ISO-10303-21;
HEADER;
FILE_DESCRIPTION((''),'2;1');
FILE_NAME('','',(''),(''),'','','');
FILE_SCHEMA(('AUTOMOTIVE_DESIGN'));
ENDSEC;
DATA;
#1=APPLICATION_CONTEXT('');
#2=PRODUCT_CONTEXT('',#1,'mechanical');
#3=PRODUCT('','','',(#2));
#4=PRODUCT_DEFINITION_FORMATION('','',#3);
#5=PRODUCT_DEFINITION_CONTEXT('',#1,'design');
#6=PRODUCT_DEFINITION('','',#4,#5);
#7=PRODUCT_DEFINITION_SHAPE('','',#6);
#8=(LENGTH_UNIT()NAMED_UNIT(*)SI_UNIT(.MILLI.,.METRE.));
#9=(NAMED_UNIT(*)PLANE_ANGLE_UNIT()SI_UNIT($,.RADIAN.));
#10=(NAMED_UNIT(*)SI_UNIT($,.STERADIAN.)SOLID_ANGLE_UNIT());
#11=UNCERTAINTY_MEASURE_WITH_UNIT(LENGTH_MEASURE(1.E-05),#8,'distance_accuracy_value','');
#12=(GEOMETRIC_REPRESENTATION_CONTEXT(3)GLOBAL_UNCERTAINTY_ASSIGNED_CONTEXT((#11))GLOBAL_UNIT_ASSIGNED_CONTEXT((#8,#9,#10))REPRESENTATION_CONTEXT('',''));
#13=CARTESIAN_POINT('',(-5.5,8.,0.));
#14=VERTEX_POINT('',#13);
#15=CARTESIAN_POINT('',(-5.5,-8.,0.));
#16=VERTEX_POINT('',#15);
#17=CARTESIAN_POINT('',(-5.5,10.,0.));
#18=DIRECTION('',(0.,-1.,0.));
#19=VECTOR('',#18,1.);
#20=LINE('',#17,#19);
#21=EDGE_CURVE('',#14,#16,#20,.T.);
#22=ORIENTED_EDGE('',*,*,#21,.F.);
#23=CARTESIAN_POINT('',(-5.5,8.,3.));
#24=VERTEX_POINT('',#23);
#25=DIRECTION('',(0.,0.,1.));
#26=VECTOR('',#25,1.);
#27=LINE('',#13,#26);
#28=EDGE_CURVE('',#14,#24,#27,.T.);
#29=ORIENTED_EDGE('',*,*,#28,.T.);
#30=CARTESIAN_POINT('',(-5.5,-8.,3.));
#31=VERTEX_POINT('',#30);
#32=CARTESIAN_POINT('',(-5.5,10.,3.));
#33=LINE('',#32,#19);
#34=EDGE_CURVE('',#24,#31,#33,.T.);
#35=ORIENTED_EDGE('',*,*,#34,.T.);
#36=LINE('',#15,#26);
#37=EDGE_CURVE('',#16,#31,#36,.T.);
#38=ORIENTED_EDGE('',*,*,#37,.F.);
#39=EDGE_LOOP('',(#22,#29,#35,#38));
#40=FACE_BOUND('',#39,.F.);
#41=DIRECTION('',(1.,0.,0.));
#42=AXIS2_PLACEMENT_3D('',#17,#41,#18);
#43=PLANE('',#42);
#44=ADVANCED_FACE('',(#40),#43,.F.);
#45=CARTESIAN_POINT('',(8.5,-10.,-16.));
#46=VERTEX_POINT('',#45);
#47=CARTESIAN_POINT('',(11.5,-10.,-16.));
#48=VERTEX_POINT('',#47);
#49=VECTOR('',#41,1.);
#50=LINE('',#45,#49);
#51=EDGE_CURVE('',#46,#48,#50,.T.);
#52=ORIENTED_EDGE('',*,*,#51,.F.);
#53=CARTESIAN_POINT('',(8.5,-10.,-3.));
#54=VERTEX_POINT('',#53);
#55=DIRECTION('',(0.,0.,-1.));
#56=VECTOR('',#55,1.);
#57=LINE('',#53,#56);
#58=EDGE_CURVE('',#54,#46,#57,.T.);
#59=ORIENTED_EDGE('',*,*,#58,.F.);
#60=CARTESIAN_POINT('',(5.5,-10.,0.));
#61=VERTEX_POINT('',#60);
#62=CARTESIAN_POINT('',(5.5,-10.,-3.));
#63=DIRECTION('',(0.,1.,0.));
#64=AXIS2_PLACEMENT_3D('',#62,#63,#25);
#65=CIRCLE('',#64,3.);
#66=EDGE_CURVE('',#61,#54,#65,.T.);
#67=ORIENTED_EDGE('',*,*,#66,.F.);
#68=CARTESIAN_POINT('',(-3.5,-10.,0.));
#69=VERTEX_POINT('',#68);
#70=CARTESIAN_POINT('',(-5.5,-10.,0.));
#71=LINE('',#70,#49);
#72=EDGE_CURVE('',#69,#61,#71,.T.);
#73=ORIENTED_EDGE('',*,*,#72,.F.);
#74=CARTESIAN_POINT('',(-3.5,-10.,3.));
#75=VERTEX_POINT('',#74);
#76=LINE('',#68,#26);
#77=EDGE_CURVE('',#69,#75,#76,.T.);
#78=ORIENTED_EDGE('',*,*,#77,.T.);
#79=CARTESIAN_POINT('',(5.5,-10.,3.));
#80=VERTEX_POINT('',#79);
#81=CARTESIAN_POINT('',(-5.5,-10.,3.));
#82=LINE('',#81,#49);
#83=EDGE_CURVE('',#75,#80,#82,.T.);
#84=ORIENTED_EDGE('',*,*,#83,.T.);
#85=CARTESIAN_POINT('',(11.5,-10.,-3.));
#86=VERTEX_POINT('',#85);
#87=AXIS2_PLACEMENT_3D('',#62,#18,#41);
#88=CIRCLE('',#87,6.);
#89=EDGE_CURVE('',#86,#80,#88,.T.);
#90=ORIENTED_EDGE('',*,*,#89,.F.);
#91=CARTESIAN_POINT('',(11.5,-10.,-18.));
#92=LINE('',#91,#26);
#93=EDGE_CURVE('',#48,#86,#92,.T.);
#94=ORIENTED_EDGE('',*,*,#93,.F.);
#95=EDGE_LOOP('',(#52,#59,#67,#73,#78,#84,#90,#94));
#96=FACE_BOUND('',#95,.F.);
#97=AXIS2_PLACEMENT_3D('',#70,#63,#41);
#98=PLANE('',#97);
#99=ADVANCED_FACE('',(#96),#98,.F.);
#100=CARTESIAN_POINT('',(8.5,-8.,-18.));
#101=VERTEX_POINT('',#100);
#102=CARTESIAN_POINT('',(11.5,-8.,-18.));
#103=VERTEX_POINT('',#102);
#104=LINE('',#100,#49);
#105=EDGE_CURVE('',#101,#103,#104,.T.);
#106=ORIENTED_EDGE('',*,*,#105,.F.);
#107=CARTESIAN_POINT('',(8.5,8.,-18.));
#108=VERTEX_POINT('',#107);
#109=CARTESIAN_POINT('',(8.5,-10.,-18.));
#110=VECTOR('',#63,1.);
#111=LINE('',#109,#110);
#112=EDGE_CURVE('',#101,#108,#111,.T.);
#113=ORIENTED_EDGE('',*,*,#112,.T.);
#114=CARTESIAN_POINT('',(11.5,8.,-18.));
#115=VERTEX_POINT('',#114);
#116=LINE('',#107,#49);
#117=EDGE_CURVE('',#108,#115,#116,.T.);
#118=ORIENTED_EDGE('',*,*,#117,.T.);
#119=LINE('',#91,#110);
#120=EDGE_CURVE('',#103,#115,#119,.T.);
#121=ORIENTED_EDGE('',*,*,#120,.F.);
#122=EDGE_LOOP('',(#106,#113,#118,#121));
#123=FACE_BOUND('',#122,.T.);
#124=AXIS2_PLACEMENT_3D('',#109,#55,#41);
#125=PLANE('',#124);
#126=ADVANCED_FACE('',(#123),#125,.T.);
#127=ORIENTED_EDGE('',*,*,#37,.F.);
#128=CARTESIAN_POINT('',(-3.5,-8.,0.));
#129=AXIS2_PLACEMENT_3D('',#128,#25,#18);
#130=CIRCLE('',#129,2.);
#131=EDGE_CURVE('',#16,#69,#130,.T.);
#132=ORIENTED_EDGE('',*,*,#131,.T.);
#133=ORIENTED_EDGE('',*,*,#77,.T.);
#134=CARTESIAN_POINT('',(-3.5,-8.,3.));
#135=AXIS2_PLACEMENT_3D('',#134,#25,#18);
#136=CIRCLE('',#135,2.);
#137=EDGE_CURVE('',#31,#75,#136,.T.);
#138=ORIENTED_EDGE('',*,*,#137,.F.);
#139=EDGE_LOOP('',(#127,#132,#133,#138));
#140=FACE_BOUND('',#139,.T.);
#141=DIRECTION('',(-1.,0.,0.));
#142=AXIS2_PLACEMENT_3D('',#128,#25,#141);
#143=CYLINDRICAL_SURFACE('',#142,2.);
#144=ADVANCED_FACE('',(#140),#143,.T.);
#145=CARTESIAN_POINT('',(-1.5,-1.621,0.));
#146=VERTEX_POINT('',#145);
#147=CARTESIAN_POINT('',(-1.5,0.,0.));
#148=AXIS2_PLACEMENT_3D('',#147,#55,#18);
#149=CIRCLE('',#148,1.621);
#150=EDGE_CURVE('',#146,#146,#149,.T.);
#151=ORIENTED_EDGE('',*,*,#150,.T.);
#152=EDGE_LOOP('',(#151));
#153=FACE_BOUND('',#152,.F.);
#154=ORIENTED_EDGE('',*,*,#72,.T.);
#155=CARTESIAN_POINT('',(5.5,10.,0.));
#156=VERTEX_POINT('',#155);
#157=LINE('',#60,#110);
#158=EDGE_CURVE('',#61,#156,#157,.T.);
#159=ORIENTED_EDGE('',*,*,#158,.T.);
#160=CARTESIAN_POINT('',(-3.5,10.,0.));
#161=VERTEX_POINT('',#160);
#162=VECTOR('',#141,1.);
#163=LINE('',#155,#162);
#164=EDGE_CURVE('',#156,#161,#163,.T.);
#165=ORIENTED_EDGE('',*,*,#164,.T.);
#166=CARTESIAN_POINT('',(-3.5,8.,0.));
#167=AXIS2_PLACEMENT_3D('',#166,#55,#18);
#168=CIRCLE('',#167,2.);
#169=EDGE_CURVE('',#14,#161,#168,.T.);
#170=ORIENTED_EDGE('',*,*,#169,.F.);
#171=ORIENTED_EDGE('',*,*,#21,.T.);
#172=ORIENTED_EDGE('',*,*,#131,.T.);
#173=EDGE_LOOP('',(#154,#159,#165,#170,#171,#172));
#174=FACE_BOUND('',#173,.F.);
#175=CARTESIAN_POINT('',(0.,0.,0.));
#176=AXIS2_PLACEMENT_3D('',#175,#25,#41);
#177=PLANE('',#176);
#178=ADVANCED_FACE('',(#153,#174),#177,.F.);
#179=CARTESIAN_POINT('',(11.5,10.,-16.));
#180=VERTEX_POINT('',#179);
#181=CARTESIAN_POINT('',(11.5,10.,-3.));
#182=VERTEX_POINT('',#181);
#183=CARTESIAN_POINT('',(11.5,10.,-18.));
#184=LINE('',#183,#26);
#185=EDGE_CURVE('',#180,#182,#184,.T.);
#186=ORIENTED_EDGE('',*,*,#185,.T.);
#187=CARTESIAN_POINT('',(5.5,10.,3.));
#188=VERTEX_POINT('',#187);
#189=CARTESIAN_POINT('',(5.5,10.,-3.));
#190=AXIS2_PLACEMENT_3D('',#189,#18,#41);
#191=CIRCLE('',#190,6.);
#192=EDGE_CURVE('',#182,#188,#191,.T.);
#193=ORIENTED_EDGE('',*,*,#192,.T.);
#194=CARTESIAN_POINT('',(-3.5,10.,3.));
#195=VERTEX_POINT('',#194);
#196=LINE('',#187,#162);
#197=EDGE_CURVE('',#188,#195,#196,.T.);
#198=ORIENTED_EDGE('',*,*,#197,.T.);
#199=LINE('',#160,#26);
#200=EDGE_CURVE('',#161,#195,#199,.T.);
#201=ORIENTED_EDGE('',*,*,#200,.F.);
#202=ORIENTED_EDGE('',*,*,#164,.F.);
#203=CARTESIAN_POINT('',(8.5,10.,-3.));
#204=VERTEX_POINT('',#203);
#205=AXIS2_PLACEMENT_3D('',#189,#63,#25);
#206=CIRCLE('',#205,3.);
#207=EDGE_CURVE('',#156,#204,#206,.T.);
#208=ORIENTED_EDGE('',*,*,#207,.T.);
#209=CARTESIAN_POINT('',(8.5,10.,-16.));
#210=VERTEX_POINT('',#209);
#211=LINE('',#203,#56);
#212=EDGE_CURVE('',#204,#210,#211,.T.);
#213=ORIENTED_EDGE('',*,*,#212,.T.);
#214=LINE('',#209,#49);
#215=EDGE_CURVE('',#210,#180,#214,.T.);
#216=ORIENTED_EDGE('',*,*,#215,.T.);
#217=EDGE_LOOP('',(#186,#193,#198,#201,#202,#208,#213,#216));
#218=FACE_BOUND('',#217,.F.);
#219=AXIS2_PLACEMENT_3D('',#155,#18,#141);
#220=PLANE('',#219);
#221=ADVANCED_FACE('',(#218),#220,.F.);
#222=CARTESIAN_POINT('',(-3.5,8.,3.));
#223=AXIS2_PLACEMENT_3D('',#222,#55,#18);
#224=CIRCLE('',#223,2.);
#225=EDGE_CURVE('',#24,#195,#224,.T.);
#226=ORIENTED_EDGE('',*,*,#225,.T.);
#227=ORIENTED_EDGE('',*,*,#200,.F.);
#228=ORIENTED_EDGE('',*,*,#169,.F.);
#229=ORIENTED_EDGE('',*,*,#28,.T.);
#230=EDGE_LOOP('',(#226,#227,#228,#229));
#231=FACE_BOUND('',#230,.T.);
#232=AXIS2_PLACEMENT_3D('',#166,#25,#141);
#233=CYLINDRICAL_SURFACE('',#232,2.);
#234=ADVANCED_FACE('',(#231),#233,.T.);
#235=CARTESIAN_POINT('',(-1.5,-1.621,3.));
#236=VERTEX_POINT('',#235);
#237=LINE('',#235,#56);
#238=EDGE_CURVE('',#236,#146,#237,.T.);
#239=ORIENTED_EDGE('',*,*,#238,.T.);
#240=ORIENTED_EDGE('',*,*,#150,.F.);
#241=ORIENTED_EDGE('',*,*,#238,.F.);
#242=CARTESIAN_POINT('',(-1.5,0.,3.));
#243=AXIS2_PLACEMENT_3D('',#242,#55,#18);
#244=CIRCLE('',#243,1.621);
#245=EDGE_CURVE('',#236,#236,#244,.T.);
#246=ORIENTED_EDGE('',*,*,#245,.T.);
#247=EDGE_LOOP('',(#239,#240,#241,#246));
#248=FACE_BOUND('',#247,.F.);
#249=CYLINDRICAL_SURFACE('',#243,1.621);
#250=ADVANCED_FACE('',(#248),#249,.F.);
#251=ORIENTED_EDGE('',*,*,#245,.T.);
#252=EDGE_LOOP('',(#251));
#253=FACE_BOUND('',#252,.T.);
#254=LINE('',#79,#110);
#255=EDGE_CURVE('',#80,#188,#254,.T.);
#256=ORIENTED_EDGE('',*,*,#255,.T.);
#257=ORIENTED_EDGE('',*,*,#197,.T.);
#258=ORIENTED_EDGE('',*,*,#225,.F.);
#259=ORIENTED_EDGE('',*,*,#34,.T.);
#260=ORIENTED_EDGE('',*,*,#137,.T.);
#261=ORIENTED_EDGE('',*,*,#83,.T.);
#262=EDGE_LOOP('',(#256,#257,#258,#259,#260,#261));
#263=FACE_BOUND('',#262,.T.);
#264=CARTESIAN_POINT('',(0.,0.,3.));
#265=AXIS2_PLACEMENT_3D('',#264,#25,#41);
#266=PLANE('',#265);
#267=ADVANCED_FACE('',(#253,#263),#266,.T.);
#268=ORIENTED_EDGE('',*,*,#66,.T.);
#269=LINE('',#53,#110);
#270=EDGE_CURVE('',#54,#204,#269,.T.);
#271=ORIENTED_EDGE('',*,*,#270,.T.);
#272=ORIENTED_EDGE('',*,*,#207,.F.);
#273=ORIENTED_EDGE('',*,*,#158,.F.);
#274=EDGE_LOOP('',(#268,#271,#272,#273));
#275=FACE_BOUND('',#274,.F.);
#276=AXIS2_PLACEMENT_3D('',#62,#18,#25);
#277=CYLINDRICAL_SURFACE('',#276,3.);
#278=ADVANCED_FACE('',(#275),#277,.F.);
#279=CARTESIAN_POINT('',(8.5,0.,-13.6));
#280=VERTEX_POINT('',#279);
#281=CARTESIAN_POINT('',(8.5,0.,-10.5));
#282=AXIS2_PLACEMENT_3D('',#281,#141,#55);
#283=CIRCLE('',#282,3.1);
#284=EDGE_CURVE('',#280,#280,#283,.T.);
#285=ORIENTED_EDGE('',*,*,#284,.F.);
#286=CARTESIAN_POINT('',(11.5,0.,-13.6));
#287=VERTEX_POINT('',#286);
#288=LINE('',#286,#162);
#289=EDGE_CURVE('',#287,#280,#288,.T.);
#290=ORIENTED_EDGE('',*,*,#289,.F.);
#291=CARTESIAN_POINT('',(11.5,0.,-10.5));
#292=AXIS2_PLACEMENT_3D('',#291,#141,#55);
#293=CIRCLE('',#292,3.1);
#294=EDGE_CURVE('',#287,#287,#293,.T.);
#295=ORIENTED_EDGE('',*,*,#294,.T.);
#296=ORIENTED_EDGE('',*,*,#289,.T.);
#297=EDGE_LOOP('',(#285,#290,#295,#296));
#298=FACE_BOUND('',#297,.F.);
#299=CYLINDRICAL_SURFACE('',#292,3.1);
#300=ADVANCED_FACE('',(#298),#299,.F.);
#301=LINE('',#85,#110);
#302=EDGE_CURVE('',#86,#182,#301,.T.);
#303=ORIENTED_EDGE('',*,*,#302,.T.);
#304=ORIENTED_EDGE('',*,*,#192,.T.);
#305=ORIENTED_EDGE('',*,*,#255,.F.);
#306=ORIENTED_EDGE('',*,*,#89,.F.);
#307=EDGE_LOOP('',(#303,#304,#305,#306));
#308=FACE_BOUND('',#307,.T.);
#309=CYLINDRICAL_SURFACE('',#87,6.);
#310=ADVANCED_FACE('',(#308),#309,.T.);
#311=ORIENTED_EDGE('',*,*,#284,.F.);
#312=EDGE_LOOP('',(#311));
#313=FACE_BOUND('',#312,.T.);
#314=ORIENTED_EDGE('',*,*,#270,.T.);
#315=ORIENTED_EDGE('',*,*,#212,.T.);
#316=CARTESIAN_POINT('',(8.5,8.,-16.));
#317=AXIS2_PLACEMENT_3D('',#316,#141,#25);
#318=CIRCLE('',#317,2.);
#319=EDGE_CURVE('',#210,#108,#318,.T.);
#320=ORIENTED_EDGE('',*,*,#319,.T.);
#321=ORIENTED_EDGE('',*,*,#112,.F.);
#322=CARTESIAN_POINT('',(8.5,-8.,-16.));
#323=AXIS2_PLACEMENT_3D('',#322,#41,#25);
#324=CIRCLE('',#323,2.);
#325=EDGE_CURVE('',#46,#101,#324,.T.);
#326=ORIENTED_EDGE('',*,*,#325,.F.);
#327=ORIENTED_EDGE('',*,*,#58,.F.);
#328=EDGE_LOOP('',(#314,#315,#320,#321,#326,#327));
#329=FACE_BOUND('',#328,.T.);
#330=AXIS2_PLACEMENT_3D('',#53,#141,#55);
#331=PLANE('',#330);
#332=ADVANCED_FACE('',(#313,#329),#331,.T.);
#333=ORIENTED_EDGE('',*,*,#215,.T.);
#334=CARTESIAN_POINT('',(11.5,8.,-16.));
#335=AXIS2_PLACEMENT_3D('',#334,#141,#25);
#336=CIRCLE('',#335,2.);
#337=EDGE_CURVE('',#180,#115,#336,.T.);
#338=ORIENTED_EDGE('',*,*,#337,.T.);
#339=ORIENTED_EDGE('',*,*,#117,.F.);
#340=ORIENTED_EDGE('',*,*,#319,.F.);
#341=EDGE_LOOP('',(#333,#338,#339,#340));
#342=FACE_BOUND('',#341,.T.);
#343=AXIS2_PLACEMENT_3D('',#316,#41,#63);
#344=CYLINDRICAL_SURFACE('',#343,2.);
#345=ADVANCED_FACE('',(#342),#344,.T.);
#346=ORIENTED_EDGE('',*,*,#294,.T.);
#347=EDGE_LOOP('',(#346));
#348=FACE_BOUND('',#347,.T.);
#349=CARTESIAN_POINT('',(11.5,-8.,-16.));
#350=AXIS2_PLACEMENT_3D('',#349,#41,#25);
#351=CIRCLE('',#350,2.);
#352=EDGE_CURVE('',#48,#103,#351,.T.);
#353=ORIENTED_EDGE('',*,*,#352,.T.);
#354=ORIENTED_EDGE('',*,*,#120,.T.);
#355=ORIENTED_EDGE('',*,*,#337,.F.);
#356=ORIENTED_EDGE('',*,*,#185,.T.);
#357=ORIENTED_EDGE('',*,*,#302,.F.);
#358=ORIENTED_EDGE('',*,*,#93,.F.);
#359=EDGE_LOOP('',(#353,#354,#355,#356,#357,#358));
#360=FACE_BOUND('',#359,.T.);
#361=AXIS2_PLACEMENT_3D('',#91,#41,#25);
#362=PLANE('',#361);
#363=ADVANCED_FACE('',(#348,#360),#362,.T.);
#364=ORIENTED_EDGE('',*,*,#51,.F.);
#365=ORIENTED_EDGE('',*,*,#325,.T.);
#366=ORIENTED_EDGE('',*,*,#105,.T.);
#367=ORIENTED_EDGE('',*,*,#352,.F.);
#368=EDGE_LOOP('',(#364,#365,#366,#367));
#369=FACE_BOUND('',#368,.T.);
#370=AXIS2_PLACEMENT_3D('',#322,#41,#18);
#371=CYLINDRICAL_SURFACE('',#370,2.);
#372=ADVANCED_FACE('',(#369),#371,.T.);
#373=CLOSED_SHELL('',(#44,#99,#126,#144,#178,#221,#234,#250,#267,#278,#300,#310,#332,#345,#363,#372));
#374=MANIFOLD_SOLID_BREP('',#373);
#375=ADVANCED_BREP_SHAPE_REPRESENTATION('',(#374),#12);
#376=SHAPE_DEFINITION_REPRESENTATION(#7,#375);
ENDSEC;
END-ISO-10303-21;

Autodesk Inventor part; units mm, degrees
ref_plane "YZ Plane" through (0, 0, 0) normal (1, 0, 0) x (0, 1, 0)
ref_plane "XZ Plane" through (0, 0, 0) normal (0, 1, 0) x (-1, 0, 0)
ref_plane "XY Plane" through (0, 0, 0) normal (0, 0, 1) x (1, 0, 0)
sketch "スケッチ1" plane through (0, 0, 0) normal (0, 0, 1) x (1, 0, 0)
  line L0 (-5.5, -10) -> (5.5, -10)
  line L1 (5.5, -10) -> (5.5, 10)
  line L2 (5.5, 10) -> (-5.5, 10)
  line L3 (-5.5, 10) -> (-5.5, -10)
  line L4 (-5.5, -10) -> (5.5, 10) construction
  line L5 (5.5, -10) -> (-5.5, 10) construction
  point P0 (0, 0)
  dimension "d0" = 11
  dimension "d1" = 20
extrude "プレート1" add sketch "スケッチ1" along normal blind 3
sketch "スケッチ2" plane through (8.5, -10, -3) normal (1, 0, 0) x (0, 1, 0)
  line L0 (20, 0) -> (0, 0)
  line L1 (0, 0) -> (0, -15)
  line L2 (0, -15) -> (20, -15)
  line L3 (20, -15) -> (20, 0)
edge flange "フランジ1" height 21 angle 90 thickness 3 bend radius 3 thickness toward (1, 0, 0) relief tear relief width 3 relief depth 1.5 edges at (5.5, 0, 0) wall of the first edge with corners at (8.5, 10, -3) (8.5, -10, -3) (8.5, -10, -18) (8.5, 10, -18)
bend "曲げ1"
corner "コーナー1"
sketch "スケッチ3" plane through (0, 0, 3) normal (0, 0, 1) x (1, 0, 0)
  line L0 (-5.5, -10) -> (-5.5, 10) projected
  line L1 (5.5, -10) -> (-5.5, -10) projected
  line L2 (5.5, 10) -> (5.5, -10) projected
  line L3 (-5.5, 10) -> (5.5, 10) projected
  point P0 (-1.5, 0)
  dimension "d29" = 4
hole "穴1" at (-1.5, 0, 3) direction (0, 0, -1) diameter 3.242 end through all thread size "M4x0.7" class "6H" standard "ISO Metric profile"
sketch "スケッチ4" plane through (11.5, -10, -18) normal (1, 0, 0) x (0, 0, -1)
  line L0 (-15, 20) -> (-15, 0) projected
  line L1 (0, 0) -> (-15, 0) projected
  line L2 (0, 20) -> (0, 0) projected
  line L3 (-15, 20) -> (0, 20) projected
  point P0 (-18, 10)
  point P1 (-7.5, 10)
  dimension "d20" = 7.5
hole "穴2" at (11.5, 0, -10.5) direction (-1, 0, 0) diameter 6.2 end through all
fillet "フィレット1" radius 2 4 edges at (-5.5, 10, 1.5) (-5.5, -10, 1.5) (10, -10, -18) (10, 10, -18)
equation "\"d2\" = Thickness"
equation "\"d3\" = BendReliefWidth"
equation "\"d4\" = BendReliefDepth"
equation "\"d5\" = MinimumRemnant"
equation "\"d6\" = TransitionRadius"
equation "\"d9\" = BendRadius"
equation "\"d10\" = CornerReliefSize"
equation "\"d11\" = GapSize"
equation "\"d12\" = JacobiRadiusSize"
equation "\"BendRadius\" = Thickness"
equation "\"BendReliefWidth\" = Thickness"
equation "\"BendReliefDepth\" = 0.5 * Thickness"
equation "\"CornerReliefSize\" = 4 * Thickness"
equation "\"MinimumRemnant\" = 2 * Thickness"
equation "\"TransitionRadius\" = BendRadius"
equation "\"JacobiRadiusSize\" = BendRadius"
equation "\"GapSize\" = Thickness"
equation "\"Thickness\" = 3"
properties part number "Belt_Tenshon_Meviy"
